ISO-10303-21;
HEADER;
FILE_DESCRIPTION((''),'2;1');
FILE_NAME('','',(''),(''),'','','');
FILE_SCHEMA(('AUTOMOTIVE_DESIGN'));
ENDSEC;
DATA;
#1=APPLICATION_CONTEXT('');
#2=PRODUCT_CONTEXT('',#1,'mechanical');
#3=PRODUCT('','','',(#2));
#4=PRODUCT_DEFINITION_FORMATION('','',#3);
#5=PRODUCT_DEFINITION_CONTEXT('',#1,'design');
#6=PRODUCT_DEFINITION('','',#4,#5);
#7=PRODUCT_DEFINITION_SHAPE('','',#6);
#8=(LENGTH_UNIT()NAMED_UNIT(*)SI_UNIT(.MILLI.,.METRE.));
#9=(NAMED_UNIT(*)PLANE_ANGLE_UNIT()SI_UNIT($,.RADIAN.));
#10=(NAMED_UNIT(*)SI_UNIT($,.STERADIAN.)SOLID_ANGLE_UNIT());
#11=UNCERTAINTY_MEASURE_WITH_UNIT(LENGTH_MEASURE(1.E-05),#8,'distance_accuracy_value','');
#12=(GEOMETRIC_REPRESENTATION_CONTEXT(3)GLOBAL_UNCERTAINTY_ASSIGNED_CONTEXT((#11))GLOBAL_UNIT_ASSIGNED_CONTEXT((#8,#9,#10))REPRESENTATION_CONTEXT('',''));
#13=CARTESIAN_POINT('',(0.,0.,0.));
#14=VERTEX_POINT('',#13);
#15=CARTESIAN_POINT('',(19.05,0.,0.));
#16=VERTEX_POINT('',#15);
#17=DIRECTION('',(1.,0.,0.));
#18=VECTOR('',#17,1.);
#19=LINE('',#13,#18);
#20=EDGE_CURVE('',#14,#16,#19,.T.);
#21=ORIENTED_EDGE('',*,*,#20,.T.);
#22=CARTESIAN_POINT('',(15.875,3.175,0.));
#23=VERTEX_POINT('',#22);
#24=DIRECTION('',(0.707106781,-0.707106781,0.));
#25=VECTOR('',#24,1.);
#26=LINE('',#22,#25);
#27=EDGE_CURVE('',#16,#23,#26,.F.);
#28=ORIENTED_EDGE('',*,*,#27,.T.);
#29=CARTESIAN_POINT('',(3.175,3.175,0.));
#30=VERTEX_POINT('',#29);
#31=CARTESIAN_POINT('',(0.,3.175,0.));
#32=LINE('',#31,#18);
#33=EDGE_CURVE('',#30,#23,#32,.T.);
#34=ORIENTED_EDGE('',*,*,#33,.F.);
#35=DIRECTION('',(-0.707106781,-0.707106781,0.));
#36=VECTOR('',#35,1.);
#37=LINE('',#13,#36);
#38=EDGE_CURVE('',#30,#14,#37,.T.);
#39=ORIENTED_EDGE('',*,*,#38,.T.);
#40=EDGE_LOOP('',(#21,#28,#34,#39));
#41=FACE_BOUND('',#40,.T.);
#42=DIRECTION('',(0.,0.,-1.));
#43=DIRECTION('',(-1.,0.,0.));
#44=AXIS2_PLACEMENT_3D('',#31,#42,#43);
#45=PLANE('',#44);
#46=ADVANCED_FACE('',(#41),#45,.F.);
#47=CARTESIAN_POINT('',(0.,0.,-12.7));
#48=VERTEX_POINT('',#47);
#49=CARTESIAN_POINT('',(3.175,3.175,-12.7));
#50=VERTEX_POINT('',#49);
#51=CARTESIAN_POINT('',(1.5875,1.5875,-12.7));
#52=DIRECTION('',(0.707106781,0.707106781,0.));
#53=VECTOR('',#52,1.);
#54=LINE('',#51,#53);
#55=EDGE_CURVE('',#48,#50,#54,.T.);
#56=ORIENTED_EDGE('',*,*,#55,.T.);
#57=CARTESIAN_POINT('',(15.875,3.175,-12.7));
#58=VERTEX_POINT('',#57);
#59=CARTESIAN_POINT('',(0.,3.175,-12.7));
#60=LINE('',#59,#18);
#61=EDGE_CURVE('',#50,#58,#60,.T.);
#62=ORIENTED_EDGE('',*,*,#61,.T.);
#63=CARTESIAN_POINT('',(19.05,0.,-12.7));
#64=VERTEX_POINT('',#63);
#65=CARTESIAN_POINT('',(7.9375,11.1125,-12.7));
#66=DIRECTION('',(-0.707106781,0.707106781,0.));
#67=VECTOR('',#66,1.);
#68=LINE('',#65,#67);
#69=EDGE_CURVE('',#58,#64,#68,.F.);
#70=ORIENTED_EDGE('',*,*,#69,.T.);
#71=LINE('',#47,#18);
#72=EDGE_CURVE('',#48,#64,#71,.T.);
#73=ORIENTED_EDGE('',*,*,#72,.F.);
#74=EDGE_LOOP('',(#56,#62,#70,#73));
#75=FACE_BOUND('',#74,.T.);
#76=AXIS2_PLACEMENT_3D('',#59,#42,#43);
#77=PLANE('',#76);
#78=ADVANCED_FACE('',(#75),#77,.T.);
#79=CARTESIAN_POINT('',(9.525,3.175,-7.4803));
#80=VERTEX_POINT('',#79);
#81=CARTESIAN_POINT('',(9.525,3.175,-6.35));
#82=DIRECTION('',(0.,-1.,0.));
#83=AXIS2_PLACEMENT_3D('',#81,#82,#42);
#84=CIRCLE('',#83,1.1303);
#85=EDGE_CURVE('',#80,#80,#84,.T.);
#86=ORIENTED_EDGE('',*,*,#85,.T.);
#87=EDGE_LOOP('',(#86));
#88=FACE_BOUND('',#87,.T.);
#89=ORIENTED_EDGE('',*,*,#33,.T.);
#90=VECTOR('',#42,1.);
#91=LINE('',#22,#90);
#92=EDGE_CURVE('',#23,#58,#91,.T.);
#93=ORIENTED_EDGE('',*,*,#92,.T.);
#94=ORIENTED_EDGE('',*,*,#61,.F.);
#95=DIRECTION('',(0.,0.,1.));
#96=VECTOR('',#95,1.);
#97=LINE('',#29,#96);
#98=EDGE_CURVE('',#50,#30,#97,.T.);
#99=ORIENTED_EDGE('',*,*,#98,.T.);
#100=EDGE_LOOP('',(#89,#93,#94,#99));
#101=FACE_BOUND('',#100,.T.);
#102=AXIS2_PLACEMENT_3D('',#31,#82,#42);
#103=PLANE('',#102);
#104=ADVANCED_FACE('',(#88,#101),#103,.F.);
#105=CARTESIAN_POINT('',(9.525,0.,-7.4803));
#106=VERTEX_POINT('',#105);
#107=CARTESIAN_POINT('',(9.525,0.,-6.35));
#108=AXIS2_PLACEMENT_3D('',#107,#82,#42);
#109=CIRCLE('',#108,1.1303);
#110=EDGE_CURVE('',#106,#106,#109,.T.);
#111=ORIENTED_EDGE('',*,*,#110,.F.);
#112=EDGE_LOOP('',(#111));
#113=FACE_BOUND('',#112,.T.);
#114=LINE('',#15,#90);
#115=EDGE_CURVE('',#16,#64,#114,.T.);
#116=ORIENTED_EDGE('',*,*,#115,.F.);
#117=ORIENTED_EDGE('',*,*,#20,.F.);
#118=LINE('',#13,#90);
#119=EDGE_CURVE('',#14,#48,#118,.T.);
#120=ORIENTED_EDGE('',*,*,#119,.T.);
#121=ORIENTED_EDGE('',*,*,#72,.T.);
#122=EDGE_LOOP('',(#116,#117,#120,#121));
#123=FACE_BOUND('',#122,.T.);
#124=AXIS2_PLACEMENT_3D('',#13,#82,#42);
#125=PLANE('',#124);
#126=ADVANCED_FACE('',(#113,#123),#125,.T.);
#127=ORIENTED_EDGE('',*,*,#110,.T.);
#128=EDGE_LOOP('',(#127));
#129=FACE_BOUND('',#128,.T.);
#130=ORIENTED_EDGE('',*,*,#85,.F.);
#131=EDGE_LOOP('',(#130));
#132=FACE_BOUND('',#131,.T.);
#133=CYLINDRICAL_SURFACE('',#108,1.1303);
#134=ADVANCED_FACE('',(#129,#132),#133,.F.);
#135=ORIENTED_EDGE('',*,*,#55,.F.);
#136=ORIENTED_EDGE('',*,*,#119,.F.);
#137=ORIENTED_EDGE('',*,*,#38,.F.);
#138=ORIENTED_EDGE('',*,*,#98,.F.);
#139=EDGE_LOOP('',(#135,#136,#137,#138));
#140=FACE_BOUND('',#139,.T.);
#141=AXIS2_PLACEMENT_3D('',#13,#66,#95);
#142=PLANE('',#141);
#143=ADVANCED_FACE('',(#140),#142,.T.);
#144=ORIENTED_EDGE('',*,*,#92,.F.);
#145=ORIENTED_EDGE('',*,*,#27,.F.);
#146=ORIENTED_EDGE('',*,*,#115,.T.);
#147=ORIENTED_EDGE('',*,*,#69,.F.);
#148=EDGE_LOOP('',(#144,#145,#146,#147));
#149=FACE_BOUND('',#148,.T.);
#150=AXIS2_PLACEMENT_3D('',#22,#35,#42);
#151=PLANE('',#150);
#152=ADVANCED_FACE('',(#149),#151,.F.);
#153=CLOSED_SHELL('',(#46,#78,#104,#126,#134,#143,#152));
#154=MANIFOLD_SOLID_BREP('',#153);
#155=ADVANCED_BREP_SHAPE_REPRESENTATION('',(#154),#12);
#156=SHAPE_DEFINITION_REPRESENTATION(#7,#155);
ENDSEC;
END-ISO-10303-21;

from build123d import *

# Parameters (mm, degrees)
SKETCH1_W                 = 19.05
SKETCH1_H                 = 12.7
BOSS_EXTRUDE1_DEPTH       = 3.175
CHAMFER1_SIZE             = 3.175
TAP_DRILL_FOR_4_40_TAP1_D = 2.2606


with BuildPart() as part:
    # Sketch1 → Boss-Extrude1 (new body)
    with BuildSketch(Plane(origin=(0, 0, 0), x_dir=(1, 0, 0), z_dir=(0, 1, 0))):
        with Locations((9.525, 6.35)):
            Rectangle(SKETCH1_W, SKETCH1_H)
    extrude(amount=BOSS_EXTRUDE1_DEPTH)

    # Chamfer1
    chamfer1_edges = [part.edges().sort_by_distance(p)[0] for p in [
        (19.05, 3.175, -6.35),
        (0, 3.175, -6.35),
    ]]
    chamfer(chamfer1_edges, length=CHAMFER1_SIZE - 0.0001)  # a hair under: the kernel refuses the full size

    # Tap Drill for #4-40 Tap1 (through all)
    with Locations(Plane(origin=(0, 0, 0), x_dir=(-1, 0, 0), z_dir=(0, -1, 0))):
        with Locations((-9.525, 6.35)):
            Hole(TAP_DRILL_FOR_4_40_TAP1_D / 2)


solid = part.part
